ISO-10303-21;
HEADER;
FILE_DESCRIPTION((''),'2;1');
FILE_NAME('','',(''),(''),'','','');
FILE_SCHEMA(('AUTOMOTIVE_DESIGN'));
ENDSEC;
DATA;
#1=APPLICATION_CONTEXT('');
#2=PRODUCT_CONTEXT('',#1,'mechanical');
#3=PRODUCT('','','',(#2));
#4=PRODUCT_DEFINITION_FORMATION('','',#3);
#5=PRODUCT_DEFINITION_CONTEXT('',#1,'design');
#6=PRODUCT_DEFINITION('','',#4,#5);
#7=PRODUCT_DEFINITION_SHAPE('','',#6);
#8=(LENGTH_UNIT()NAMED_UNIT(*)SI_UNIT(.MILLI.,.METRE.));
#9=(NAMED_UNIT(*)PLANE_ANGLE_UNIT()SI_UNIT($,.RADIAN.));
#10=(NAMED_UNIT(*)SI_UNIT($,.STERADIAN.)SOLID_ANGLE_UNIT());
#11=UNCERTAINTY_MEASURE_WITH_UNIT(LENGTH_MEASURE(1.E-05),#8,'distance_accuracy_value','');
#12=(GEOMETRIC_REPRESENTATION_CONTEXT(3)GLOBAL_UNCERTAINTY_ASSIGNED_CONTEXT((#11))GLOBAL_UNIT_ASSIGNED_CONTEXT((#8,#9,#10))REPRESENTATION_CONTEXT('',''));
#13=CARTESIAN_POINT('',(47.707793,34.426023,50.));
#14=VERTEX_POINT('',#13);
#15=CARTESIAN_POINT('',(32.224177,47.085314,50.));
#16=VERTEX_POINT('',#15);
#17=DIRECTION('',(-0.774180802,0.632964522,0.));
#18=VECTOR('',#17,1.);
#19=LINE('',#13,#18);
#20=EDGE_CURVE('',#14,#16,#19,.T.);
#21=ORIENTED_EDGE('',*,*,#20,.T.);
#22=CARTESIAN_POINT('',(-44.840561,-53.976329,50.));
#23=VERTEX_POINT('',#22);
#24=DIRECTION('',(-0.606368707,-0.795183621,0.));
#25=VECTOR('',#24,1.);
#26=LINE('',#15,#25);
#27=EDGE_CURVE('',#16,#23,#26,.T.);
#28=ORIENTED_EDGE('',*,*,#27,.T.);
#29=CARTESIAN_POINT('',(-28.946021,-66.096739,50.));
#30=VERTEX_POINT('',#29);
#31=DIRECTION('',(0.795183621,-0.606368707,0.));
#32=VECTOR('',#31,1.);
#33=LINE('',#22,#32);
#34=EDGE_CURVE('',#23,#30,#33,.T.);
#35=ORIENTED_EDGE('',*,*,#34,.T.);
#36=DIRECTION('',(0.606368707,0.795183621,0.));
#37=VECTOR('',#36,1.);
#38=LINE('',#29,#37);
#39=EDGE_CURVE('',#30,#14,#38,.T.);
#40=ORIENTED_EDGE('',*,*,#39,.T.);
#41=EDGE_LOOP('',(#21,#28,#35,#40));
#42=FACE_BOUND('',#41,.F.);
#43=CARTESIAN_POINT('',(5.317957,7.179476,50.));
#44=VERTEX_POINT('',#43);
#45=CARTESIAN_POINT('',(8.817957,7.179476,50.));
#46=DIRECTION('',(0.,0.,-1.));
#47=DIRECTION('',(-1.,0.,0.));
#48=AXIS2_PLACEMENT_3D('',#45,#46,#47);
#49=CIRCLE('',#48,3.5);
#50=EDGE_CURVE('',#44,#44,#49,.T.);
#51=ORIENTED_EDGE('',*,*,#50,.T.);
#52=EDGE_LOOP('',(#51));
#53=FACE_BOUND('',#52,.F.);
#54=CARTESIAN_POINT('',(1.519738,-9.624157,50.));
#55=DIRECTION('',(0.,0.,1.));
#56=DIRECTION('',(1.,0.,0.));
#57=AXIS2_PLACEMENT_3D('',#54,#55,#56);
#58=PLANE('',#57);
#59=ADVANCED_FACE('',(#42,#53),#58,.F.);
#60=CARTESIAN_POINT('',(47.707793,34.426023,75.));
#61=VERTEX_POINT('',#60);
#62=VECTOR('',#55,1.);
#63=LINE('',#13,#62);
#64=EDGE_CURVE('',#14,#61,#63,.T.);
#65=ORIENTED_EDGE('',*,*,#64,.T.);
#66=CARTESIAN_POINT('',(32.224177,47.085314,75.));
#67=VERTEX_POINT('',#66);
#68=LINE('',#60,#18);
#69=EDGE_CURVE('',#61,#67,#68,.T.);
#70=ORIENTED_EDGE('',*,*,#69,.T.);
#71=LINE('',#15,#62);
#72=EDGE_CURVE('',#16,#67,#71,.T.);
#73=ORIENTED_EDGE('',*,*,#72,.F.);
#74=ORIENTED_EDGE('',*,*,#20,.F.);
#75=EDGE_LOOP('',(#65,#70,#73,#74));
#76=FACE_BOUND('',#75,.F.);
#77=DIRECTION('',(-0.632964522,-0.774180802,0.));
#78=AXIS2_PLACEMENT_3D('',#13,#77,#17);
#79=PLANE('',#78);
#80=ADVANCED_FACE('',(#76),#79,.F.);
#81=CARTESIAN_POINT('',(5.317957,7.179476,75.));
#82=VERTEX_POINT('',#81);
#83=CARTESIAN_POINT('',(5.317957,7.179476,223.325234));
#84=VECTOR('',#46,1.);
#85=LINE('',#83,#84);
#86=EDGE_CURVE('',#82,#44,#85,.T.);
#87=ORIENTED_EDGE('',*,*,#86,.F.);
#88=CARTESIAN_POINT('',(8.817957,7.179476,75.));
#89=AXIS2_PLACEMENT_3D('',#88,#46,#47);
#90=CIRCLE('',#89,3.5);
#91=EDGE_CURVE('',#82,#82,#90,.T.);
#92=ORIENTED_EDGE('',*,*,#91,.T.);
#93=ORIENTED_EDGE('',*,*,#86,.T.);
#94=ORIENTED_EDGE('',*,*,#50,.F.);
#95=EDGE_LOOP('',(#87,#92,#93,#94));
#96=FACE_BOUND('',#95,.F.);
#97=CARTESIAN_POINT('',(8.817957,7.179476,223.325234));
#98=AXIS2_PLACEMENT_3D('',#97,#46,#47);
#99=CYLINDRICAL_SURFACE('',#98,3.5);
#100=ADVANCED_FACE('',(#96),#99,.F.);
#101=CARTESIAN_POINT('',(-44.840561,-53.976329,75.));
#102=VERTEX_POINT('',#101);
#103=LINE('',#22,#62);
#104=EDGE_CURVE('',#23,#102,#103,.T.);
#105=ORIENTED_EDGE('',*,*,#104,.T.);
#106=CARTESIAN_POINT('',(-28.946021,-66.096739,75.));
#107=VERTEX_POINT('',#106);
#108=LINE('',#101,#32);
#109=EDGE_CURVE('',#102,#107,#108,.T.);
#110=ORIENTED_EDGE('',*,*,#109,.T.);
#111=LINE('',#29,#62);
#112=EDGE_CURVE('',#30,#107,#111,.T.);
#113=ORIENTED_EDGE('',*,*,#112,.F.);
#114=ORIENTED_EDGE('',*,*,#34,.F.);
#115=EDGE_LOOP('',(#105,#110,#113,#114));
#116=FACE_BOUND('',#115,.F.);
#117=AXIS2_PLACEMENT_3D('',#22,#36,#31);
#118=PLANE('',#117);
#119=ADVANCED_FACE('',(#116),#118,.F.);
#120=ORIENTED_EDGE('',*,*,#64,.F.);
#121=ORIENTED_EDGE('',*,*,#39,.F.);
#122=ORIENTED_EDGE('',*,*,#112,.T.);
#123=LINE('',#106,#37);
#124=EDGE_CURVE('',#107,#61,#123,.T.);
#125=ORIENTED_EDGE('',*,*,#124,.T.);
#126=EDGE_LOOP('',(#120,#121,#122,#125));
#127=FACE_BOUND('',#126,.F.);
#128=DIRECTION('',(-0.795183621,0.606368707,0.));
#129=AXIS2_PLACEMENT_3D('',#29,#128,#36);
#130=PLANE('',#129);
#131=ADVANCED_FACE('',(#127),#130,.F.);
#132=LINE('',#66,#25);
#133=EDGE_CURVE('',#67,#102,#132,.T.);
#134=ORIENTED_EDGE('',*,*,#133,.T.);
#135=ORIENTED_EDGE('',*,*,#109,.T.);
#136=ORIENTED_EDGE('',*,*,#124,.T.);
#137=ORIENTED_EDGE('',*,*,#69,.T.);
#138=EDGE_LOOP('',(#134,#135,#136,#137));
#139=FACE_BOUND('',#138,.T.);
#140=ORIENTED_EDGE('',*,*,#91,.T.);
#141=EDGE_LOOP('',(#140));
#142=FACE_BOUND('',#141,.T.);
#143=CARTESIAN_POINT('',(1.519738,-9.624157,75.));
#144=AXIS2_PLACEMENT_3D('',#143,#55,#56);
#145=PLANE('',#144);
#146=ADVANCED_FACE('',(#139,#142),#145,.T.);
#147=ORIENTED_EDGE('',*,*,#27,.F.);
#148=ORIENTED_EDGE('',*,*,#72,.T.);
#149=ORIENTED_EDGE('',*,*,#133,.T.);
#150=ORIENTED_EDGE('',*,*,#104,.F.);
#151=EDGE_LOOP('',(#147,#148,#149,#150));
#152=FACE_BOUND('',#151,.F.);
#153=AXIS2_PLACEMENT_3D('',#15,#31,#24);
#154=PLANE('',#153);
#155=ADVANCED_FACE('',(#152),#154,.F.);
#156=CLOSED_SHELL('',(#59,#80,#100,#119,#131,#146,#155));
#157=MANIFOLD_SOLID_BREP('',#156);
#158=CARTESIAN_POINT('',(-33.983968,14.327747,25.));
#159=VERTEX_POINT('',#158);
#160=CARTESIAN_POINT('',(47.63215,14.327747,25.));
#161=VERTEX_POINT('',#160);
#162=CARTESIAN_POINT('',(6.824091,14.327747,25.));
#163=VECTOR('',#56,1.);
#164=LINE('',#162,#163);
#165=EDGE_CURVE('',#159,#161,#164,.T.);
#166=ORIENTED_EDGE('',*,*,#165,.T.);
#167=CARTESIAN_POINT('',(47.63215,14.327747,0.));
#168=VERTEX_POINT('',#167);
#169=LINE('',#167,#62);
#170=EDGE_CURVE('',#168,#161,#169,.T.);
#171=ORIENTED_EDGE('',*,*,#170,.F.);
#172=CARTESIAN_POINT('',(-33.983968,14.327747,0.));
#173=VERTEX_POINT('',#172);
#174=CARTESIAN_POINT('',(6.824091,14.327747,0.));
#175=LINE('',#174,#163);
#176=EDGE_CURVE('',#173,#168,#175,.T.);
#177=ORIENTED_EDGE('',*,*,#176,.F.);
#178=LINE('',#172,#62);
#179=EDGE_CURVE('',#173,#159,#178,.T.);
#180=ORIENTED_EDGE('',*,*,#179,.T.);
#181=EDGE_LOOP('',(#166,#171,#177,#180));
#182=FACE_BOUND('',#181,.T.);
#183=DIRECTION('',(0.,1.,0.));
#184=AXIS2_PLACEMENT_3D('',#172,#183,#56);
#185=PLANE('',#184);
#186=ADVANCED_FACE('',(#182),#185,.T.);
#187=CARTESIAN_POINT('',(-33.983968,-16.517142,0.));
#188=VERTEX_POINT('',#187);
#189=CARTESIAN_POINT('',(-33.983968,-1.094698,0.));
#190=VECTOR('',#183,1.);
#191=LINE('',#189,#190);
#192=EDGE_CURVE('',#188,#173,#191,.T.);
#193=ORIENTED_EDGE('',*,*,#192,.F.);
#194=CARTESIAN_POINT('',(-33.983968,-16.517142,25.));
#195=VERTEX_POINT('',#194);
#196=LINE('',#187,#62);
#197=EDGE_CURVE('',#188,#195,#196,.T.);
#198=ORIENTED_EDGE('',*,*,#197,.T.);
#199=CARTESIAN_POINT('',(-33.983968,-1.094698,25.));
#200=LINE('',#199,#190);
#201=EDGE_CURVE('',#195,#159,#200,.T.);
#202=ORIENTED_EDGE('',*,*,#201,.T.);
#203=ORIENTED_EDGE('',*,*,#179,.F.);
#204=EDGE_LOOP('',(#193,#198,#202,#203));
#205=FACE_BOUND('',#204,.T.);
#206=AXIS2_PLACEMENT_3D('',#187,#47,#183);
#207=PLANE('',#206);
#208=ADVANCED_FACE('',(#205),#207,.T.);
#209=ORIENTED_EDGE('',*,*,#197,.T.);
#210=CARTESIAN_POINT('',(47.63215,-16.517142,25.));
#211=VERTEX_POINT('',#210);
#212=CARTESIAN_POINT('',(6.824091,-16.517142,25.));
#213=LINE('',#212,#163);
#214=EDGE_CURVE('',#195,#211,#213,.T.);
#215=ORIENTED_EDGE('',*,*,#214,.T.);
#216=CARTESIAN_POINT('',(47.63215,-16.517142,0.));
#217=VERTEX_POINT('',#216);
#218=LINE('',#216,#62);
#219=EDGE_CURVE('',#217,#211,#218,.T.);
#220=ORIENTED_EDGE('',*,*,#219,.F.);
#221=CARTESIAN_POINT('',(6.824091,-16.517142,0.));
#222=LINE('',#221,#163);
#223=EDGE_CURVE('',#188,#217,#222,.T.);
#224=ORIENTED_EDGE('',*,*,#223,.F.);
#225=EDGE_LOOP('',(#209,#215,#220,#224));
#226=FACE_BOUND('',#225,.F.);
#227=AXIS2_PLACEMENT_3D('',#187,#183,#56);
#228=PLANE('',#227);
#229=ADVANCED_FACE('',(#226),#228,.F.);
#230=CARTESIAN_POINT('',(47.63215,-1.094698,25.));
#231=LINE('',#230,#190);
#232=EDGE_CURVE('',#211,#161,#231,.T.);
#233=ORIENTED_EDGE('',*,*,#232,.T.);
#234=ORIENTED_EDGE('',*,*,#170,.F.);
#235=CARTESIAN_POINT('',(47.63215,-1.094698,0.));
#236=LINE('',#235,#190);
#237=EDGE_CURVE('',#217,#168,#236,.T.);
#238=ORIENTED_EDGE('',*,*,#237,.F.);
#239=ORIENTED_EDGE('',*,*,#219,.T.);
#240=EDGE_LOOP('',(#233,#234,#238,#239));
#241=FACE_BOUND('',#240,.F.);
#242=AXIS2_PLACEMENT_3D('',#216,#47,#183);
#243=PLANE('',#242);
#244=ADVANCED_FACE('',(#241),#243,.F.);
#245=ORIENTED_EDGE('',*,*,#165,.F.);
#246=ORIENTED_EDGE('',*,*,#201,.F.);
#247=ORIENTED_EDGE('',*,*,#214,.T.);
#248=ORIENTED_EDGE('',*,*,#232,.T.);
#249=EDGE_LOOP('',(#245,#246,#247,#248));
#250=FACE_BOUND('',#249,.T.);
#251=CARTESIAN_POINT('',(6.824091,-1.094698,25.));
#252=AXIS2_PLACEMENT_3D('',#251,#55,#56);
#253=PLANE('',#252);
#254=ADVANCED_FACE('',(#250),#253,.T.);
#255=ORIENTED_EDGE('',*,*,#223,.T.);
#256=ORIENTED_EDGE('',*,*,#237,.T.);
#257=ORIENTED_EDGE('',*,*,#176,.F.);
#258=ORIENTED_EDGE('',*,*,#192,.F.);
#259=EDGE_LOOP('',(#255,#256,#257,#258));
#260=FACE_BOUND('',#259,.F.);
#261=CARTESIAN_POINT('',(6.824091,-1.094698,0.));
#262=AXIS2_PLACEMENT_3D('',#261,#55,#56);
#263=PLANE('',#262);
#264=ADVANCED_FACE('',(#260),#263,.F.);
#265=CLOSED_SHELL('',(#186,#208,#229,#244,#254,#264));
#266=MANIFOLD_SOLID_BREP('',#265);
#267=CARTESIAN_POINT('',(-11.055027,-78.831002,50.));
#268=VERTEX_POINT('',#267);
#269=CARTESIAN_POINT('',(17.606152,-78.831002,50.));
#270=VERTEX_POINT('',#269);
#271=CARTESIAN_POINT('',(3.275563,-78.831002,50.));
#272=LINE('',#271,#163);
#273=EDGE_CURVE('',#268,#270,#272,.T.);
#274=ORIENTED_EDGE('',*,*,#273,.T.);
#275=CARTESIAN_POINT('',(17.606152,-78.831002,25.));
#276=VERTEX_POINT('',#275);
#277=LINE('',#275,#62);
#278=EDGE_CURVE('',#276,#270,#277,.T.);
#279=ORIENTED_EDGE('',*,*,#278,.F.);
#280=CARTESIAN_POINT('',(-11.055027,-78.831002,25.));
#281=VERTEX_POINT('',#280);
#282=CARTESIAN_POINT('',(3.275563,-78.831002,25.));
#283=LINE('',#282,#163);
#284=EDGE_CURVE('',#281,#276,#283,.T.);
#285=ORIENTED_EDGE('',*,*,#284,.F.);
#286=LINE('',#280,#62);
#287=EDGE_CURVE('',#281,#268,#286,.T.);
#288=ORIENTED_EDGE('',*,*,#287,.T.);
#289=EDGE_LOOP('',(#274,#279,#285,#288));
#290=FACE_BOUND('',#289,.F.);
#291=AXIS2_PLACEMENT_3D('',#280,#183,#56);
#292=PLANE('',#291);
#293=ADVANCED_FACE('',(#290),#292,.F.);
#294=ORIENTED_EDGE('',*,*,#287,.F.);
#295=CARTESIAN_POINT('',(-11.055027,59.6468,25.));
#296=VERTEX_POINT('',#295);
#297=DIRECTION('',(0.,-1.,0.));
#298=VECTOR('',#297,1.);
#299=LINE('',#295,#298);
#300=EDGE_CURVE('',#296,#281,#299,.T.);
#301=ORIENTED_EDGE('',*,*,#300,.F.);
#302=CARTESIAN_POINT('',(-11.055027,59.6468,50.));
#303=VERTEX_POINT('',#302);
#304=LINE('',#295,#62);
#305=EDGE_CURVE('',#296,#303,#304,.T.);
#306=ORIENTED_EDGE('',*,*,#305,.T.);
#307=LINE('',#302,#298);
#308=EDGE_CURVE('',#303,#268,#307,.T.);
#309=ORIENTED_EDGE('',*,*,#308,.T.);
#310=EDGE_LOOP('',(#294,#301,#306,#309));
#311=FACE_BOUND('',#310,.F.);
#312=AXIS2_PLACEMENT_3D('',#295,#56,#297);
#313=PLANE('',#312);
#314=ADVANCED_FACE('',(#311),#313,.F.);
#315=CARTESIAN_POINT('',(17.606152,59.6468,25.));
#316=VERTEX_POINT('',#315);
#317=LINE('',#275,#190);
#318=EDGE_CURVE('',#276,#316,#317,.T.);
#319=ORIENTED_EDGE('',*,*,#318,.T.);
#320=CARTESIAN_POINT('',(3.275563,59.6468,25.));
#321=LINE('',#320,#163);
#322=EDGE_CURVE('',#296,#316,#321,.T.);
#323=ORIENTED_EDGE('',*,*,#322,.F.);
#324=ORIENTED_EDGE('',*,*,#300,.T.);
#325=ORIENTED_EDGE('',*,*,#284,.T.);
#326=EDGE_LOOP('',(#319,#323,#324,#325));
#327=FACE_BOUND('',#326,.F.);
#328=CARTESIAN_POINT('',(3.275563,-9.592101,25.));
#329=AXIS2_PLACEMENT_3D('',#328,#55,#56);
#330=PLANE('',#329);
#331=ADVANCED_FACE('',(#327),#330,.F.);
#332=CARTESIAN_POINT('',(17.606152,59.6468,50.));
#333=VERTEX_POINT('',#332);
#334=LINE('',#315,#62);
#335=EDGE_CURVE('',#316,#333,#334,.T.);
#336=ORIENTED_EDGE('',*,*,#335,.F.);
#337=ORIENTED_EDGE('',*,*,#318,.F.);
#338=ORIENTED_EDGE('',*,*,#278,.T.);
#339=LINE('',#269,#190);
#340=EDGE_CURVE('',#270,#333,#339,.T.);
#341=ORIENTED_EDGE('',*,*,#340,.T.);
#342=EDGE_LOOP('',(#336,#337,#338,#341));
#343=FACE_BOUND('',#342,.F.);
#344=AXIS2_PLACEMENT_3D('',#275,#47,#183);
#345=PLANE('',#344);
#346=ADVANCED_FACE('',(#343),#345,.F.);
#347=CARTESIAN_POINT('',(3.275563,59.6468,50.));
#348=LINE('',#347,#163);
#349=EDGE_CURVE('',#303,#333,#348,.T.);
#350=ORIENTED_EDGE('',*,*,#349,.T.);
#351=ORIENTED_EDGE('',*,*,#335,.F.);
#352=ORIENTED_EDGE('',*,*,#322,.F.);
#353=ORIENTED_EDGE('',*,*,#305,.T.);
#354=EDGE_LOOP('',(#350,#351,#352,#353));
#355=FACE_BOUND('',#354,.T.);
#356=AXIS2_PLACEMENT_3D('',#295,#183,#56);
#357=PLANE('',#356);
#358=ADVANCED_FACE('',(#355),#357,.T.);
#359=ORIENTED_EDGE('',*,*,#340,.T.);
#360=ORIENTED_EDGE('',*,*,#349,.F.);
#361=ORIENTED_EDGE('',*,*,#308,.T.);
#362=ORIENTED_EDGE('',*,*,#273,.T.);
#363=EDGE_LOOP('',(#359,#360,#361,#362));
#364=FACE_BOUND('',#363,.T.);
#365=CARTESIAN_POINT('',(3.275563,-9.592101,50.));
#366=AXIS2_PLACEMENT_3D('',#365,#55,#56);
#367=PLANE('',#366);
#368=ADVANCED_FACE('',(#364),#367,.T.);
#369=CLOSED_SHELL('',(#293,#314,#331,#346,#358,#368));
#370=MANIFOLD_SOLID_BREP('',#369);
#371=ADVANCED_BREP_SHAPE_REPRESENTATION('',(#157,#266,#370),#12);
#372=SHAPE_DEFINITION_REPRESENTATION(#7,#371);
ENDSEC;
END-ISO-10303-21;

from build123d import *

# Parameters (mm, degrees)
F0_W     = 81.6161185503
F0_H     = 30.8448886499
F1_DEPTH = 25
F2_W     = 28.6611793563
F2_H     = 138.4778022766
F2_H_2   = 45.3190533444
F3_DEPTH = 25
F5_DEPTH = 25
F7_D     = 7


# Not quite as in the source:
# - a feature names something its author has since deleted; it is built from what else it names


with BuildPart() as f1:
    # F0 (on Top) → F1 (new body)
    with BuildSketch(Plane.XY):
        with Locations((6.8240910769, -1.094697509)):
            Rectangle(F0_W, F0_H)
    extrude(amount=F1_DEPTH)


with BuildPart() as f3:
    # F2 (on face) → F3 (new body)
    with BuildSketch(Plane.XY.offset(25)):
        with Locations((3.2755625434, -9.5921009779)):
            Rectangle(F2_W, F2_H)
        with Locations((3.2755625434, 36.9872734882)):
            Rectangle(F2_W, F2_H_2)
    extrude(amount=F3_DEPTH)


with BuildPart() as f5:
    # F4 (on face) → F5 (new body)
    with BuildSketch(Plane.XY.offset(50)):
        Polygon((47.707793434, 34.4260234633), (32.224177393, 47.0853138974), (-44.8405611611, -53.9763291491), (-28.9460210758, -66.0967394174), align=None)
    extrude(amount=F5_DEPTH)

    # F7 (through all)
    with Locations(Plane.XY.offset(75)):
        with Locations((8.8179567829, 7.1794758551)):
            Hole(F7_D / 2)


solid = Compound([f1.part, f3.part, f5.part])
